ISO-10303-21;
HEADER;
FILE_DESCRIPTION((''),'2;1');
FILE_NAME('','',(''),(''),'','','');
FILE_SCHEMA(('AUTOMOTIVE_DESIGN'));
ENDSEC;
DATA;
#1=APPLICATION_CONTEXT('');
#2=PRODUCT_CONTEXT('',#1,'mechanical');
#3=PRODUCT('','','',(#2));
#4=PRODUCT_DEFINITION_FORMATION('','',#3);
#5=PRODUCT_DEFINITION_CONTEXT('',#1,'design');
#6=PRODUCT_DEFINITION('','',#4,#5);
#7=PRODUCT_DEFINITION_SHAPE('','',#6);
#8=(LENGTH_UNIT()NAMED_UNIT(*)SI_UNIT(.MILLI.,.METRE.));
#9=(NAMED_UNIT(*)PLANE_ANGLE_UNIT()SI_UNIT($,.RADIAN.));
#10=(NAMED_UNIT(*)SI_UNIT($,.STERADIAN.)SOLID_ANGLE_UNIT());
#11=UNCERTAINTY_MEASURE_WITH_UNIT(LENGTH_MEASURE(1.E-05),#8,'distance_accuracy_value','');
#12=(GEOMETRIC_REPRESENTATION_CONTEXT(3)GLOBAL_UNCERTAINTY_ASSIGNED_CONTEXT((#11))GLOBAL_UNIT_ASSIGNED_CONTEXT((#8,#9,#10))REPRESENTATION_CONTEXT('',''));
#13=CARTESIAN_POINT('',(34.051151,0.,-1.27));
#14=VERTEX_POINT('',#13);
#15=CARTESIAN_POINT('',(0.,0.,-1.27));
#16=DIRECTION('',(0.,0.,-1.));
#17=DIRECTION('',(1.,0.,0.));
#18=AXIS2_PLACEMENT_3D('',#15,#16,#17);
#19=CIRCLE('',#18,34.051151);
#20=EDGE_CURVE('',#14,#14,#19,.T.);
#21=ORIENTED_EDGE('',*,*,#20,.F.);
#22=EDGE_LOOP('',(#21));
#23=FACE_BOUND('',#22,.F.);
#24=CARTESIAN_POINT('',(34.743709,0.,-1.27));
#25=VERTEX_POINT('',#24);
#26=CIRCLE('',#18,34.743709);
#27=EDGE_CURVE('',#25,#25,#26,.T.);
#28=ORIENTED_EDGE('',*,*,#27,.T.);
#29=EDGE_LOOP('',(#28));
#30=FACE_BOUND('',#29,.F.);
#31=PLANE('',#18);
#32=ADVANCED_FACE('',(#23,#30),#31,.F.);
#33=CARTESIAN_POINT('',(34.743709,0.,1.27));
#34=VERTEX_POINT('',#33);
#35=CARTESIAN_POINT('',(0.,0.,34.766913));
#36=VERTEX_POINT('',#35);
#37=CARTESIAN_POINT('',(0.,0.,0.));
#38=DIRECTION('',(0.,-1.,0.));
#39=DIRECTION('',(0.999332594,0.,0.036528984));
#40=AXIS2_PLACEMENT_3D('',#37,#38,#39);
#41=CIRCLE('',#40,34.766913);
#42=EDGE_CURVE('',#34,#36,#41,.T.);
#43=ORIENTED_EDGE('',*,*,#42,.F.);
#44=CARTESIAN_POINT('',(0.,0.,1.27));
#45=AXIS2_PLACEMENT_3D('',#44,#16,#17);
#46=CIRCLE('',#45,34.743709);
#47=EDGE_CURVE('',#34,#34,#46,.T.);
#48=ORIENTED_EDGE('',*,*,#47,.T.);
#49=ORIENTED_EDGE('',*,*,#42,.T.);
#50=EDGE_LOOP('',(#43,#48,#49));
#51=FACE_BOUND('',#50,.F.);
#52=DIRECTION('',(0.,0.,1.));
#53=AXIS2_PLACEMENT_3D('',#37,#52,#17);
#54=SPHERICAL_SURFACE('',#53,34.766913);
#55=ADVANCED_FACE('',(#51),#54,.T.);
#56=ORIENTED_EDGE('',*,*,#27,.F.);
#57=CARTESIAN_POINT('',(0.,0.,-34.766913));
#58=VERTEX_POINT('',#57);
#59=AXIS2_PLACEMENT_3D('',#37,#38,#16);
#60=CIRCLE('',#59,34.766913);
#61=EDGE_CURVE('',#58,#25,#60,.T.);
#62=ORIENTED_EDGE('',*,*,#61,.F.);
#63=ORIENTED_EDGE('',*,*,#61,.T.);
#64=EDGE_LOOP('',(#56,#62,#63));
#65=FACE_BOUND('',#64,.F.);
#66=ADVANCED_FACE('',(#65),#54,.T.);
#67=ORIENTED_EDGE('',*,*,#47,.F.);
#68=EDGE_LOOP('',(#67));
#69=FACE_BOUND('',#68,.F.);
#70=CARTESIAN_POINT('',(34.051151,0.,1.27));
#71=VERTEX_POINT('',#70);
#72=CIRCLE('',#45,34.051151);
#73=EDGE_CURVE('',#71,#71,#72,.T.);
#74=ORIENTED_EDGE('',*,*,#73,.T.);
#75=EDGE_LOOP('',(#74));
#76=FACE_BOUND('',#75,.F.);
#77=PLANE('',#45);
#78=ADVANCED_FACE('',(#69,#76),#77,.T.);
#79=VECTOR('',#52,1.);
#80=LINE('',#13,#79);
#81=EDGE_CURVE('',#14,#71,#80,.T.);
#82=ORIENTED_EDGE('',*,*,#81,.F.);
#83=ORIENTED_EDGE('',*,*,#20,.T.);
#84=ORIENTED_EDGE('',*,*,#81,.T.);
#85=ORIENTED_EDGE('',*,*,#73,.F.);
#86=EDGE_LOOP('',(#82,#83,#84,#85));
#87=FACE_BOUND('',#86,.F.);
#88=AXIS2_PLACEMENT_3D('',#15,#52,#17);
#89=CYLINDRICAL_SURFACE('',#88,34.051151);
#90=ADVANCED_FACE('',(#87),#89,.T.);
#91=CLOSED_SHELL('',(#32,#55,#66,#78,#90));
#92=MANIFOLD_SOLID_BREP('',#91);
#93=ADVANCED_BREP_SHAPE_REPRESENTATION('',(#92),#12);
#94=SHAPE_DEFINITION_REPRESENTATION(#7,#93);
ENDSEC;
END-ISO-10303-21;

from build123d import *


# Not quite as in the source:
# - the program builds the solid bodies; features that only make, move or delete a surface that nothing else refers to are left out


with BuildPart() as f1:
    # F0 (on Front) → F1 (revolve)
    with BuildSketch(Plane.XZ):
        with BuildLine():
            Line((0, 34.7669126303), (0, -34.7669126303))
            ThreePointArc((0, -34.7669126303), (24.1307297321, -25.0289052186), (34.7437089822, -1.27))
            Line((34.7437089822, -1.27), (34.0511506106, -1.27))
            Line((34.0511506106, -1.27), (34.0511506106, 0))
            Line((34.0511506106, 0), (34.0511506106, 1.27))
            Line((34.0511506106, 1.27), (34.7437089822, 1.27))
            ThreePointArc((34.7437089822, 1.27), (24.1307297321, 25.0289052186), (0, 34.7669126303))
        make_face()
    revolve(axis=Axis((0, 0, 0), (0, 0, -1)))


solid = f1.part
